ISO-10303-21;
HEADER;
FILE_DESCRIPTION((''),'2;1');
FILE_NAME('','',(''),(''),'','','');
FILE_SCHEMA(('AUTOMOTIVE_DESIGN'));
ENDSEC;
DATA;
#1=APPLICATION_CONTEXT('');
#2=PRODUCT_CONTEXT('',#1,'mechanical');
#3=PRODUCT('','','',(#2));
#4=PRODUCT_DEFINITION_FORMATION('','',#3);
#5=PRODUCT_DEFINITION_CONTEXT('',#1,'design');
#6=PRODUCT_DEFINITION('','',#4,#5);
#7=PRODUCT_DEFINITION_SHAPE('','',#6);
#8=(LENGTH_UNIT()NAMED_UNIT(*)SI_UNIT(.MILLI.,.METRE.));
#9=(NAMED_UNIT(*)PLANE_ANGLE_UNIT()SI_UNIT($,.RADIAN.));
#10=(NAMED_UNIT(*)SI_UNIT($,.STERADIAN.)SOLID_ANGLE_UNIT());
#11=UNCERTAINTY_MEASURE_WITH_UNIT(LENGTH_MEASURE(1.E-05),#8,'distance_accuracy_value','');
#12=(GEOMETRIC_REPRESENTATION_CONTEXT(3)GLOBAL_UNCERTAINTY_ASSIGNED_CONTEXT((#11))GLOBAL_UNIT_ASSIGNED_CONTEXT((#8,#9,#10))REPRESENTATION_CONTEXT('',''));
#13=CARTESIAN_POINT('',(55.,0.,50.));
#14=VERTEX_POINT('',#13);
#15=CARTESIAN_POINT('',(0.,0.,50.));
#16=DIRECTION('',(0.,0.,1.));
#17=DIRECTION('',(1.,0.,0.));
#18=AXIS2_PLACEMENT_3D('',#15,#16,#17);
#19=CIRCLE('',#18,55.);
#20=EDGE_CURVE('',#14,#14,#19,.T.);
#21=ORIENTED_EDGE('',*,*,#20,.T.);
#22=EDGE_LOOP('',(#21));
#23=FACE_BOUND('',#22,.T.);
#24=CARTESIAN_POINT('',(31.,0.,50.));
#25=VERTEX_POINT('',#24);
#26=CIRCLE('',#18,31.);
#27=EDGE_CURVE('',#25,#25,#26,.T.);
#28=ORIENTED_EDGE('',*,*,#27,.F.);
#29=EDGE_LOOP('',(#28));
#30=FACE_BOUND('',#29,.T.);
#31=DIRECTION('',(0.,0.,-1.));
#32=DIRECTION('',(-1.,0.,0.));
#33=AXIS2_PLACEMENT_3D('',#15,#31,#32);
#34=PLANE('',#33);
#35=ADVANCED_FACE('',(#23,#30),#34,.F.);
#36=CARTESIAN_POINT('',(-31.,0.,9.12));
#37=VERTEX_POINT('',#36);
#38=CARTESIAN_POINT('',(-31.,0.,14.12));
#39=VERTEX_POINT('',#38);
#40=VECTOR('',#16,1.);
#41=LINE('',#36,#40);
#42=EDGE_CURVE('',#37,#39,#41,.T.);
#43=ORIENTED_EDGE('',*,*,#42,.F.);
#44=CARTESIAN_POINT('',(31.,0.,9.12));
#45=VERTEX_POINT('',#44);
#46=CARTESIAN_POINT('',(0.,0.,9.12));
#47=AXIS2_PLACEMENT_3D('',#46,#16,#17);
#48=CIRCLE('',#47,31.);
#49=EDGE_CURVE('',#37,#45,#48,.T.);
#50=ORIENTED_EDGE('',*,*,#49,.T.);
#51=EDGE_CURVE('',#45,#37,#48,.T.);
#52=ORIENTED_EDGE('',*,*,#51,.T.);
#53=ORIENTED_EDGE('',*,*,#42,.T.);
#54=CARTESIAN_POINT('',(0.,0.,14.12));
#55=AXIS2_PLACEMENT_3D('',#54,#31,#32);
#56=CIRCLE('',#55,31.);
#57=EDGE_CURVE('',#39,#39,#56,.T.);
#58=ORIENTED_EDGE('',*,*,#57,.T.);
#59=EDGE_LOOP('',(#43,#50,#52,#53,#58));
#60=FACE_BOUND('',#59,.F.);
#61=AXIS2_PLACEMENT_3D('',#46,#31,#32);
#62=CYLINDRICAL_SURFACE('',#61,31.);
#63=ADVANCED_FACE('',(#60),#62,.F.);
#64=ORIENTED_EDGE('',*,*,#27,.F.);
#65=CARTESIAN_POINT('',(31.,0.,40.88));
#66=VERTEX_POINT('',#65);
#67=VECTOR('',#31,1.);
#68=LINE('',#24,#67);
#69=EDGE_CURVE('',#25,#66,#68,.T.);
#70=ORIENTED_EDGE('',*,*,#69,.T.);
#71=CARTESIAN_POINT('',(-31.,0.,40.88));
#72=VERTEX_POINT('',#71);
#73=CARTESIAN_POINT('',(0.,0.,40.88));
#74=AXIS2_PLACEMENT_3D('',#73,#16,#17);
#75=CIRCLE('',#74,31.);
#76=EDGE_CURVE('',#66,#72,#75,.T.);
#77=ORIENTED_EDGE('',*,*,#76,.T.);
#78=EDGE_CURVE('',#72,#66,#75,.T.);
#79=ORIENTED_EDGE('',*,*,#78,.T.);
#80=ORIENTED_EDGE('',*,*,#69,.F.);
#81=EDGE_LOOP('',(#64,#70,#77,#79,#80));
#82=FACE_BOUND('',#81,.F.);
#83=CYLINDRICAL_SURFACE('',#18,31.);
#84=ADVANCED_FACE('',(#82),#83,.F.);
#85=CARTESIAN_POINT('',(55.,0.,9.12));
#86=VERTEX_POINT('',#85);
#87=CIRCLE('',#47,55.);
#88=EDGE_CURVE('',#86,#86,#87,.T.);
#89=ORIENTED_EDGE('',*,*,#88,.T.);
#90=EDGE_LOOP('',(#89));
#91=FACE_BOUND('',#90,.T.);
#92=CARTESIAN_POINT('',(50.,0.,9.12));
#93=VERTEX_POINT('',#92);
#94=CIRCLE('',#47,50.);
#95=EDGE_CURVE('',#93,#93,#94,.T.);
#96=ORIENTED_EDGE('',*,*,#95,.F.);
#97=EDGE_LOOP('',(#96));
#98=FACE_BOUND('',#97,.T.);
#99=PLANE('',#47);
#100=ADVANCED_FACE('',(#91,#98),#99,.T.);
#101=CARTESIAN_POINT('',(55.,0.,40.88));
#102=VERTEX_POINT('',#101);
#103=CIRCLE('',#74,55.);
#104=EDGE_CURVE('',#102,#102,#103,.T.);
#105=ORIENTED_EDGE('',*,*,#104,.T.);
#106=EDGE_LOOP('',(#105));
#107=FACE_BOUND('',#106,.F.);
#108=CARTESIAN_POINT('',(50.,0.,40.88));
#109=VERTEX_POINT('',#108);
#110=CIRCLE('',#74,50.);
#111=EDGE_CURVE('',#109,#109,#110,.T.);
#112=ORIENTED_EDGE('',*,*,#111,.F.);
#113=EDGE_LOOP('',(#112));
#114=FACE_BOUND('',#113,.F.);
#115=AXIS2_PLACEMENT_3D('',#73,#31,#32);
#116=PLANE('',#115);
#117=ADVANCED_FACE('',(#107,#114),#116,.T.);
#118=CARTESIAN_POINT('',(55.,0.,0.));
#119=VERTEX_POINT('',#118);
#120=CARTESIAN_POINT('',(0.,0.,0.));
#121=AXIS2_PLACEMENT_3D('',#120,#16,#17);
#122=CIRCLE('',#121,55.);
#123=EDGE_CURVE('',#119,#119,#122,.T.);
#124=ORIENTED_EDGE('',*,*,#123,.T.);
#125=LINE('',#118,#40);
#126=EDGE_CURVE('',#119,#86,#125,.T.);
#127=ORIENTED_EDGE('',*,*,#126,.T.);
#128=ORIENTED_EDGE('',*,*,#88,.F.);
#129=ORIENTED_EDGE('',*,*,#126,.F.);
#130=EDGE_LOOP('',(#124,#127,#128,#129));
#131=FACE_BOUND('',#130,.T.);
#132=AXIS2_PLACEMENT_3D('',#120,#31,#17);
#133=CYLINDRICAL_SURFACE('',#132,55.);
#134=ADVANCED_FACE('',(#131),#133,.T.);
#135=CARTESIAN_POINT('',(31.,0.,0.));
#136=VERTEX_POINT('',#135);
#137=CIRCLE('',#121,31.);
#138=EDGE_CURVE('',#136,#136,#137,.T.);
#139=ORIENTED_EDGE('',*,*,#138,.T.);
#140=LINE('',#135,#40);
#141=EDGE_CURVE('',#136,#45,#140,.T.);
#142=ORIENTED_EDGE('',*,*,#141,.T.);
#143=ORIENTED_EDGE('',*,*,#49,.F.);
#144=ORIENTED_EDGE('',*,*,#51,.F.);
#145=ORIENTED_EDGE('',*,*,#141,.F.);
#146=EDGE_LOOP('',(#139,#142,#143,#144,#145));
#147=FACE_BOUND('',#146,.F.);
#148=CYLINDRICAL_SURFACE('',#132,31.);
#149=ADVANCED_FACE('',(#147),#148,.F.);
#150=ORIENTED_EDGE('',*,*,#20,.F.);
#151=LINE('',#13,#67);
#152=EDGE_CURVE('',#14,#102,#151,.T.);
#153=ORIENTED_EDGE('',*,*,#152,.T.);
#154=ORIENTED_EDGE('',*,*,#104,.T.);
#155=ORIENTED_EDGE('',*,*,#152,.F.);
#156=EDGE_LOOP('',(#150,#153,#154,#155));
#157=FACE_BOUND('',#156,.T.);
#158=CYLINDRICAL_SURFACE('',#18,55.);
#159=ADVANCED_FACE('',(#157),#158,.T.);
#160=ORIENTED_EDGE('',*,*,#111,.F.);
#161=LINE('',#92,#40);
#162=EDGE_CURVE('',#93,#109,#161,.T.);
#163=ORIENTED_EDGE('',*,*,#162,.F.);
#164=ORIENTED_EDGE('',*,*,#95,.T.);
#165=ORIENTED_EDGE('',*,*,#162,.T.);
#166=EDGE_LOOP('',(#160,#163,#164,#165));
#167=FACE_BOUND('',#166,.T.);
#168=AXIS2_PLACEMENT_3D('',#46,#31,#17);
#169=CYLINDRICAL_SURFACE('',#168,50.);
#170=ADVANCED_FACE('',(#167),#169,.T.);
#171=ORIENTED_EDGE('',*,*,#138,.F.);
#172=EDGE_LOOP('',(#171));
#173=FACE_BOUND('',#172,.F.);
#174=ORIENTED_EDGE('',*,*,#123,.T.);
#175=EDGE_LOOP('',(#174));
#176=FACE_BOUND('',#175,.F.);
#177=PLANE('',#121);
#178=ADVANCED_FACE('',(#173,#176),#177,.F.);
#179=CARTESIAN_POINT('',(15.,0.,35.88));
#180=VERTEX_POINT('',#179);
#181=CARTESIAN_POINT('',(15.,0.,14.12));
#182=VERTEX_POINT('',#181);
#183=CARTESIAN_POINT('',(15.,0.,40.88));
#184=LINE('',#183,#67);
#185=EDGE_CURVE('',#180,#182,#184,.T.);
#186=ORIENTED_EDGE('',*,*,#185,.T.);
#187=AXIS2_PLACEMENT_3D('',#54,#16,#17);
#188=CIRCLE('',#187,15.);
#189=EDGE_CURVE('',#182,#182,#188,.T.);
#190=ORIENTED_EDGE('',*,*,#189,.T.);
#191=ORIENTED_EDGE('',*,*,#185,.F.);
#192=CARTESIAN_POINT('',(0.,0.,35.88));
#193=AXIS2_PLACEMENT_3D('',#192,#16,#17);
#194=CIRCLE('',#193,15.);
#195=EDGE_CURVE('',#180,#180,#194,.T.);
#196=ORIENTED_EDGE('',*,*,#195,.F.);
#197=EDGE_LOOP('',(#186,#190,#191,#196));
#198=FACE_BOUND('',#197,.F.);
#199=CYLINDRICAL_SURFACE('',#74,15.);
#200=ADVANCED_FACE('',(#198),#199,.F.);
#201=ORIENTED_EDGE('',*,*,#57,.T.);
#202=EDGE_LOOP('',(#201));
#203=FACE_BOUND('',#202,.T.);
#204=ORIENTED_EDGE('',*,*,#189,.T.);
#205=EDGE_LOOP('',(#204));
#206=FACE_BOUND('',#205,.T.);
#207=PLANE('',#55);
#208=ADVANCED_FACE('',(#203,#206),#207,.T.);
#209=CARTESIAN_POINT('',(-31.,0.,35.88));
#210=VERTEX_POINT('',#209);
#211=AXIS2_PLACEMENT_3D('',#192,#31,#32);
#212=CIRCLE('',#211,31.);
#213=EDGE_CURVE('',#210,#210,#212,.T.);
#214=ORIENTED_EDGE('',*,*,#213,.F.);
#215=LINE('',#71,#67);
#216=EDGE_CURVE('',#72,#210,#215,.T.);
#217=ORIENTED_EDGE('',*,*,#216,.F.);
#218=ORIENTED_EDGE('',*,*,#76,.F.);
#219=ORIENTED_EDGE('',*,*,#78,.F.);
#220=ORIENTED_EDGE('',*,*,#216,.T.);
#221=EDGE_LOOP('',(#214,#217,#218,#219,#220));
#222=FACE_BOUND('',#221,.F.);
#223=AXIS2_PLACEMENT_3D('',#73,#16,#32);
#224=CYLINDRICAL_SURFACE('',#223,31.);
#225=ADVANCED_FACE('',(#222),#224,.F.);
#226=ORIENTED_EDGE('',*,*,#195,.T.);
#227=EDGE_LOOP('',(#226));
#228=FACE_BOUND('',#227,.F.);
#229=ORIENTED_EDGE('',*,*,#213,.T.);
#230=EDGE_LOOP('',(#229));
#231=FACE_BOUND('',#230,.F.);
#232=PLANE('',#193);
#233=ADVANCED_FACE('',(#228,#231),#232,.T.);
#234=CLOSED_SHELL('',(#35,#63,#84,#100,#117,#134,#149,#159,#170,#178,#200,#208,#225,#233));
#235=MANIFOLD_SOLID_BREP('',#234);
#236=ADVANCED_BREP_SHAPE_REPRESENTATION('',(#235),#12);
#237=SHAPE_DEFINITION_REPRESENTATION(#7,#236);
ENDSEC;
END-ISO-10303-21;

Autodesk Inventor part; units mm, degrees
ref_plane "YZ Plane" through (0, 0, 0) normal (1, 0, 0) x (0, 1, 0)
ref_plane "XZ Plane" through (0, 0, 0) normal (0, 1, 0) x (-1, 0, 0)
sketch "Sketch1" plane through (0, 0, 0) normal (0, 0, 1) x (1, 0, 0)
  circle A0 centre (0, 0) radius 31
  circle A1 centre (0, 0) radius 55
  dimension "d0" = 62
  dimension "d1" = 110
extrude "Extrusion1" add sketch "Sketch1" along normal blind 9.12
sketch "Sketch2" plane through (0, 0, 9.12) normal (0, 0, 1) x (1, 0, 0)
  circle A0 centre (0, 0) radius 50
  circle A1 centre (0, 0) radius 15
  dimension "d4" = 100
  dimension "d5" = 30
extrude "Extrusion2" add sketch "Sketch2" along normal blind 31.76
ref_plane "Work Plane1" through (0, 0, 25) normal (0, 0, 1) x (1, 0, 0)
sketch "Sketch3" plane through (0, 0, 9.12) normal (0, 0, -1) x (-1, 0, 0)
  circle A0 centre (0, 0) radius 31 projected
  circle A1 centre (0, 0) radius 31
  dimension "d8" = 62
extrude "Extrusion3" cut sketch "Sketch3" against normal blind 5
mirror "Mirror1" about plane through (0, 0, 25) normal (0, 0, 1) of "Extrusion1", "Extrusion3", "Extrusion2"
sketch "Sketch4" plane through (0, 0, 9.12) normal (0, 0, -1) x (-1, 0, 0)
  circle A0 centre (0, 0) radius 31
  dimension "d11" = 62
extrude "Extrusion4" cut sketch "Sketch4" against normal blind 5
properties part number "Rodillo Guia de Cadena" material "Steel, Galvanized"
